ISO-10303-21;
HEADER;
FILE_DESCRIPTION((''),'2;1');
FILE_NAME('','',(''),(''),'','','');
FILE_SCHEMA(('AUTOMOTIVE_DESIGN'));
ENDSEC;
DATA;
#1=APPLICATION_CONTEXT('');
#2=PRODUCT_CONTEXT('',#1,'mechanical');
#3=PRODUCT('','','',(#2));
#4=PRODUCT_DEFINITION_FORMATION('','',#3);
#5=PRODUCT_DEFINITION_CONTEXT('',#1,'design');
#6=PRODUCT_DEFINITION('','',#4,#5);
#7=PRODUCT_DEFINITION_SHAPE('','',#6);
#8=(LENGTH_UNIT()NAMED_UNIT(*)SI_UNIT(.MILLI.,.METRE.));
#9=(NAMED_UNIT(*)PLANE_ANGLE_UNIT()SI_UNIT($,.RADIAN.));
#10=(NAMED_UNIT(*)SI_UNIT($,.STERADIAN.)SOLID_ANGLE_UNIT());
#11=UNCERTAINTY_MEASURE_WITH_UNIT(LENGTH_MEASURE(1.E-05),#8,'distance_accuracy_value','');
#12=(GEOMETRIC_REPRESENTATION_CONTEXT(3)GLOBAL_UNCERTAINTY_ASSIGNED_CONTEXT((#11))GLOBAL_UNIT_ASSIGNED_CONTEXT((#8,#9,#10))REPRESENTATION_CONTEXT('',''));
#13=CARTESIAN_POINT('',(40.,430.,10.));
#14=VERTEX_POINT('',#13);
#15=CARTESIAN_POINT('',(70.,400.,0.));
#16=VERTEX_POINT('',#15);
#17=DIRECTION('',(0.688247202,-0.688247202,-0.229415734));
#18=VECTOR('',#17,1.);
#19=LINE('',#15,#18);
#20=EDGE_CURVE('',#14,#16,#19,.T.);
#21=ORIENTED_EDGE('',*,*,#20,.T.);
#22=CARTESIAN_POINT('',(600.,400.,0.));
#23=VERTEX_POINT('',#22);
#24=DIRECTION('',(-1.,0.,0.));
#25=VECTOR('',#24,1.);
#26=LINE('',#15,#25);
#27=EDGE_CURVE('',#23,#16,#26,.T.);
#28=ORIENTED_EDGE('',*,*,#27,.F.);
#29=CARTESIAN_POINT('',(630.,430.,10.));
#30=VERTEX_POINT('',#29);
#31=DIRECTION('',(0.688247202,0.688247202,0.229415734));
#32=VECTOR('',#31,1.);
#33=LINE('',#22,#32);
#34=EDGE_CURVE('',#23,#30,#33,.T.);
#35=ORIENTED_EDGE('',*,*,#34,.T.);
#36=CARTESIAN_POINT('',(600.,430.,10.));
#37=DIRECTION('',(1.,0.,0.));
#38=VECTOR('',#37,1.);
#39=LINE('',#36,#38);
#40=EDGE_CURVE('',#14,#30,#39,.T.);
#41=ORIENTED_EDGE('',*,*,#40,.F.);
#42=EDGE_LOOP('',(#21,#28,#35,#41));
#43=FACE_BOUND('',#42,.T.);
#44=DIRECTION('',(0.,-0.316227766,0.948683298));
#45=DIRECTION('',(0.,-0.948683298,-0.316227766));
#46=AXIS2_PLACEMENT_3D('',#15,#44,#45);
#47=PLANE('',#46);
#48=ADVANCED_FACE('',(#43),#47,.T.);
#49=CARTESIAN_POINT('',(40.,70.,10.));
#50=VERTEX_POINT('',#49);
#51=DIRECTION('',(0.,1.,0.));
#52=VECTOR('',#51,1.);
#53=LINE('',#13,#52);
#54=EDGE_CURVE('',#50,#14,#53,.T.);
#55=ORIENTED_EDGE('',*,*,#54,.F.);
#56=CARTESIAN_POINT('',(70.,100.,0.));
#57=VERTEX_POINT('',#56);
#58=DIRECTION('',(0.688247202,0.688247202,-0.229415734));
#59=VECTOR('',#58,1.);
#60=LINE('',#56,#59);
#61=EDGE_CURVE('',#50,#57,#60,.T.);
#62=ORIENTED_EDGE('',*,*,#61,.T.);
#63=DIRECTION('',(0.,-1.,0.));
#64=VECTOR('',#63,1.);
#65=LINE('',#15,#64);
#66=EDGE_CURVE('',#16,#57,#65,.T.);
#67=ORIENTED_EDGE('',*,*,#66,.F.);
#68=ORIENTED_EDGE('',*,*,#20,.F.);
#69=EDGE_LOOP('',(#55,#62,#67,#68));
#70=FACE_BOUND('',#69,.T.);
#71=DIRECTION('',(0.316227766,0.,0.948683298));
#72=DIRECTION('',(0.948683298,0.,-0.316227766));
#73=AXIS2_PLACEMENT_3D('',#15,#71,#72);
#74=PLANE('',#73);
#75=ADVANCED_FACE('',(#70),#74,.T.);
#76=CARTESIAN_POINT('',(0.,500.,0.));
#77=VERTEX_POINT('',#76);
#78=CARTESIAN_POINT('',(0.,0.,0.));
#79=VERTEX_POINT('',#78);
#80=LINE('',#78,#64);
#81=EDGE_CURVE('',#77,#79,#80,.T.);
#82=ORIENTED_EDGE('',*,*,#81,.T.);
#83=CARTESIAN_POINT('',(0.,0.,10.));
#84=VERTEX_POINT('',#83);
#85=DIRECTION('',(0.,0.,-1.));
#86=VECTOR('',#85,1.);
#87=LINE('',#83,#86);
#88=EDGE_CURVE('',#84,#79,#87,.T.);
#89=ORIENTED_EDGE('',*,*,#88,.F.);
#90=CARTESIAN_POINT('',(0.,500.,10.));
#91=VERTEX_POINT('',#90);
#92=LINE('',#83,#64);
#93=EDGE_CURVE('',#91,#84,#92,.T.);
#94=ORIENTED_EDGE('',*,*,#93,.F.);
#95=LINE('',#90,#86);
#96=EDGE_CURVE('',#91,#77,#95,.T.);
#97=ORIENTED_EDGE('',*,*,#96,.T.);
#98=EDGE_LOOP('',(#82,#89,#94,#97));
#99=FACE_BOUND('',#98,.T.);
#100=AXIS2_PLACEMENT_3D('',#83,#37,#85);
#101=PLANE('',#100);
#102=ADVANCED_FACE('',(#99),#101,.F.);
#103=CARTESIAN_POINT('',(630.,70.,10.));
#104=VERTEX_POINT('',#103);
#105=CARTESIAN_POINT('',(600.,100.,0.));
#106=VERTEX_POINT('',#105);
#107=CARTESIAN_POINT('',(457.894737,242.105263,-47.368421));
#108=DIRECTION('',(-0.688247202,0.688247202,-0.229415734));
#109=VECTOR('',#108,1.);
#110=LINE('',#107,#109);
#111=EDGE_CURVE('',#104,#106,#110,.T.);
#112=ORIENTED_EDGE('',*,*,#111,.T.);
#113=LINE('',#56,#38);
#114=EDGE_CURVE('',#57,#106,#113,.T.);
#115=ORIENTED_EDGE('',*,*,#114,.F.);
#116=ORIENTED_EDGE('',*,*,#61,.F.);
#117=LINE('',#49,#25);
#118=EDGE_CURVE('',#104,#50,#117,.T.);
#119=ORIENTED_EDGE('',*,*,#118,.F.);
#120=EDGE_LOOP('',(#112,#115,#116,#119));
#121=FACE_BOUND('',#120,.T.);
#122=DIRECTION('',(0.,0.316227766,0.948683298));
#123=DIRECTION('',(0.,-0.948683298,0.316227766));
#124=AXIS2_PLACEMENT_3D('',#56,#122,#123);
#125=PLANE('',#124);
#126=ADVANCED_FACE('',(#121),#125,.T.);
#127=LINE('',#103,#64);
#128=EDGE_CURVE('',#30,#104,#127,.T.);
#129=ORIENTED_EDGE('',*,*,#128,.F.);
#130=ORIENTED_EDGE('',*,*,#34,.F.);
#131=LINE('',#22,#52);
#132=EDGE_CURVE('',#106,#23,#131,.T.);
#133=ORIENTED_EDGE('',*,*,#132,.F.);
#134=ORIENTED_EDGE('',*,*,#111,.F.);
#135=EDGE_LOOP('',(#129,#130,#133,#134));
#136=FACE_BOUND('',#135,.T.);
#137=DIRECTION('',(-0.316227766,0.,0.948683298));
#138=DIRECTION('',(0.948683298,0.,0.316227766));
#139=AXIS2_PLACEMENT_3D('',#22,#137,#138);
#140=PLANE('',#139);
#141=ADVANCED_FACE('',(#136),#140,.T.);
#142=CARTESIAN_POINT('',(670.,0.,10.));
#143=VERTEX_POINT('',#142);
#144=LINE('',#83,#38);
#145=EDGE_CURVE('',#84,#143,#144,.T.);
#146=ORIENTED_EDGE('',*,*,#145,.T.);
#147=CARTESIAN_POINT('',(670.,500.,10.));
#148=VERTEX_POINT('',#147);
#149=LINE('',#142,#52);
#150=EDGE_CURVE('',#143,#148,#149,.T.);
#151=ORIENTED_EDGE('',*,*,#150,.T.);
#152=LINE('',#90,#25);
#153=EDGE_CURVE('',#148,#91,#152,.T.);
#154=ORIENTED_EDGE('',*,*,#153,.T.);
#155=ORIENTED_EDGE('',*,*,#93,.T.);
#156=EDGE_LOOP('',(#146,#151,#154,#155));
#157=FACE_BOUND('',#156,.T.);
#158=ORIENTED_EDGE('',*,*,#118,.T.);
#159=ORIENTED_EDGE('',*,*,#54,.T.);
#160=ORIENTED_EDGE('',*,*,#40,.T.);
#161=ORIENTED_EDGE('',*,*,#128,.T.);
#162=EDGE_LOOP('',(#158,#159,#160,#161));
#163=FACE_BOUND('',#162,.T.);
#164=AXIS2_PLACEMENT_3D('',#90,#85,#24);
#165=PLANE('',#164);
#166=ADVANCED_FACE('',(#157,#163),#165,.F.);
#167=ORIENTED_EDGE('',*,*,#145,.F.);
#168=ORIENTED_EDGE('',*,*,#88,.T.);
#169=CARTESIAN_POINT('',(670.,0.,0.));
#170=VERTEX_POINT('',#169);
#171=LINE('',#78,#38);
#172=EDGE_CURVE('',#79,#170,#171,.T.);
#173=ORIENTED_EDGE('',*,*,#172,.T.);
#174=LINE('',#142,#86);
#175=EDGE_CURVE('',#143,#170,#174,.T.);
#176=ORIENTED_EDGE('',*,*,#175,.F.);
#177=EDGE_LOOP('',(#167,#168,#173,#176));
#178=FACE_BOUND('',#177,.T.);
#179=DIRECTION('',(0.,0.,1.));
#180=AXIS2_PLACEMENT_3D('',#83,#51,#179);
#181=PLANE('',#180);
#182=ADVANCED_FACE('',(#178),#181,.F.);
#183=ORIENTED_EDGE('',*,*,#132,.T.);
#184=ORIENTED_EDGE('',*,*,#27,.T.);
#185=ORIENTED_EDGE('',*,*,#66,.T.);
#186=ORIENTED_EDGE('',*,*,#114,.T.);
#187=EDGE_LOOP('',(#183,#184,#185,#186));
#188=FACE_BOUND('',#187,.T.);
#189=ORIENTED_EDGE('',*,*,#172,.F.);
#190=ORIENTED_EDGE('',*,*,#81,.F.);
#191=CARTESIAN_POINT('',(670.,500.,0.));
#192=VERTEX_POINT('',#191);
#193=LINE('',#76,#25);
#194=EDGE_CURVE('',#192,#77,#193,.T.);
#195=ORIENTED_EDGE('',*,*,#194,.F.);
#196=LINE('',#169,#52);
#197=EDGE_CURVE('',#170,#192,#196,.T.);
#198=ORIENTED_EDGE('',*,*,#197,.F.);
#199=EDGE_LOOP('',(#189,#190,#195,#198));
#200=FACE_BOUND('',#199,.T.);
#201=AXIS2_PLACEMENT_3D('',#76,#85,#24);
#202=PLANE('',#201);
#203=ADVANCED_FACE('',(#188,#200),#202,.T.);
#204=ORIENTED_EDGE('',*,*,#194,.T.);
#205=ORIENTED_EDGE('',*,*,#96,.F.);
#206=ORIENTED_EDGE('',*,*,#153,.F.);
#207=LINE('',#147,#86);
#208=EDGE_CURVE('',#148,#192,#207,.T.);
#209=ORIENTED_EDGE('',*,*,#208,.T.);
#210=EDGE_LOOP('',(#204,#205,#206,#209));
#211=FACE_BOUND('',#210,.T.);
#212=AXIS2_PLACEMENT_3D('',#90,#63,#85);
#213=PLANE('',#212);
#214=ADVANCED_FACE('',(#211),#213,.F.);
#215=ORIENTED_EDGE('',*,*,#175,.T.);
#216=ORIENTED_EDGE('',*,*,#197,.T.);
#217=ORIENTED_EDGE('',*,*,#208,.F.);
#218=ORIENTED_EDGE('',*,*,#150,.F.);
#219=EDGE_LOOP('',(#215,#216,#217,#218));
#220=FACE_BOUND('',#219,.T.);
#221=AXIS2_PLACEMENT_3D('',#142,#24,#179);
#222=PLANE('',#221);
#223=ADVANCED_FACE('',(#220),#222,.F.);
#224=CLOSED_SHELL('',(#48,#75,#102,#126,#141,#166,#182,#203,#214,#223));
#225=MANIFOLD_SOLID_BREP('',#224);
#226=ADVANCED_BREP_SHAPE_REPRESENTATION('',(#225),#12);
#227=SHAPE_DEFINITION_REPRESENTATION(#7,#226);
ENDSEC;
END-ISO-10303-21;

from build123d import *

# Parameters (mm, degrees)
SKETCH1_W      = 670
SKETCH1_H      = 500
SKETCH1_W_2    = 530
SKETCH1_H_2    = 300
EXTRUDE1_DEPTH = 10
CHAMFER1_SIZE2 = 30
CHAMFER1_SIZE  = 10
CHAMFER2_SIZE2 = 10
CHAMFER2_SIZE  = 30
CHAMFER3_SIZE2 = 30
CHAMFER3_SIZE  = 10
CHAMFER4_SIZE2 = 10
CHAMFER4_SIZE  = 30


with BuildPart() as part:
    # Sketch1 → Extrude1 (new body)
    with BuildSketch(Plane.XY):
        with Locations((335, 250)):
            Rectangle(SKETCH1_W, SKETCH1_H)
        with Locations((335, 250)):
            Rectangle(SKETCH1_W_2, SKETCH1_H_2, mode=Mode.SUBTRACT)
    extrude(amount=EXTRUDE1_DEPTH)

    # Chamfer1
    chamfer1_edges = [part.edges().sort_by_distance(p)[0] for p in [
        (335, 400, 10),
    ]]
    chamfer1_side = [part.faces().sort_by_distance(p)[0] for p in [
        (335, 400, 9.8),
    ]]
    chamfer(chamfer1_edges, length=CHAMFER1_SIZE - 0.0001, length2=CHAMFER1_SIZE2 - 0.0001, reference=chamfer1_side[0])  # a hair under: the kernel refuses the full size

    # Chamfer2
    chamfer2_edges = [part.edges().sort_by_distance(p)[0] for p in [
        (70, 264.99995, 10),
    ]]
    chamfer2_side = [part.faces().sort_by_distance(p)[0] for p in [
        (69.8, 264.99995, 10),
    ]]
    chamfer(chamfer2_edges, length=CHAMFER2_SIZE - 0.0001, length2=CHAMFER2_SIZE2 - 0.0001, reference=chamfer2_side[0])  # a hair under: the kernel refuses the full size

    # Chamfer3
    chamfer3_edges = [part.edges().sort_by_distance(p)[0] for p in [
        (320.00005, 100, 10),
    ]]
    chamfer3_side = [part.faces().sort_by_distance(p)[0] for p in [
        (320.00005, 100, 9.8),
    ]]
    chamfer(chamfer3_edges, length=CHAMFER3_SIZE - 0.0001, length2=CHAMFER3_SIZE2 - 0.0001, reference=chamfer3_side[0])  # a hair under: the kernel refuses the full size

    # Chamfer4
    chamfer4_edges = [part.edges().sort_by_distance(p)[0] for p in [
        (600, 250, 10),
    ]]
    chamfer4_side = [part.faces().sort_by_distance(p)[0] for p in [
        (600.2, 250, 10),
    ]]
    chamfer(chamfer4_edges, length=CHAMFER4_SIZE - 0.0001, length2=CHAMFER4_SIZE2 - 0.0001, reference=chamfer4_side[0])  # a hair under: the kernel refuses the full size


solid = part.part
